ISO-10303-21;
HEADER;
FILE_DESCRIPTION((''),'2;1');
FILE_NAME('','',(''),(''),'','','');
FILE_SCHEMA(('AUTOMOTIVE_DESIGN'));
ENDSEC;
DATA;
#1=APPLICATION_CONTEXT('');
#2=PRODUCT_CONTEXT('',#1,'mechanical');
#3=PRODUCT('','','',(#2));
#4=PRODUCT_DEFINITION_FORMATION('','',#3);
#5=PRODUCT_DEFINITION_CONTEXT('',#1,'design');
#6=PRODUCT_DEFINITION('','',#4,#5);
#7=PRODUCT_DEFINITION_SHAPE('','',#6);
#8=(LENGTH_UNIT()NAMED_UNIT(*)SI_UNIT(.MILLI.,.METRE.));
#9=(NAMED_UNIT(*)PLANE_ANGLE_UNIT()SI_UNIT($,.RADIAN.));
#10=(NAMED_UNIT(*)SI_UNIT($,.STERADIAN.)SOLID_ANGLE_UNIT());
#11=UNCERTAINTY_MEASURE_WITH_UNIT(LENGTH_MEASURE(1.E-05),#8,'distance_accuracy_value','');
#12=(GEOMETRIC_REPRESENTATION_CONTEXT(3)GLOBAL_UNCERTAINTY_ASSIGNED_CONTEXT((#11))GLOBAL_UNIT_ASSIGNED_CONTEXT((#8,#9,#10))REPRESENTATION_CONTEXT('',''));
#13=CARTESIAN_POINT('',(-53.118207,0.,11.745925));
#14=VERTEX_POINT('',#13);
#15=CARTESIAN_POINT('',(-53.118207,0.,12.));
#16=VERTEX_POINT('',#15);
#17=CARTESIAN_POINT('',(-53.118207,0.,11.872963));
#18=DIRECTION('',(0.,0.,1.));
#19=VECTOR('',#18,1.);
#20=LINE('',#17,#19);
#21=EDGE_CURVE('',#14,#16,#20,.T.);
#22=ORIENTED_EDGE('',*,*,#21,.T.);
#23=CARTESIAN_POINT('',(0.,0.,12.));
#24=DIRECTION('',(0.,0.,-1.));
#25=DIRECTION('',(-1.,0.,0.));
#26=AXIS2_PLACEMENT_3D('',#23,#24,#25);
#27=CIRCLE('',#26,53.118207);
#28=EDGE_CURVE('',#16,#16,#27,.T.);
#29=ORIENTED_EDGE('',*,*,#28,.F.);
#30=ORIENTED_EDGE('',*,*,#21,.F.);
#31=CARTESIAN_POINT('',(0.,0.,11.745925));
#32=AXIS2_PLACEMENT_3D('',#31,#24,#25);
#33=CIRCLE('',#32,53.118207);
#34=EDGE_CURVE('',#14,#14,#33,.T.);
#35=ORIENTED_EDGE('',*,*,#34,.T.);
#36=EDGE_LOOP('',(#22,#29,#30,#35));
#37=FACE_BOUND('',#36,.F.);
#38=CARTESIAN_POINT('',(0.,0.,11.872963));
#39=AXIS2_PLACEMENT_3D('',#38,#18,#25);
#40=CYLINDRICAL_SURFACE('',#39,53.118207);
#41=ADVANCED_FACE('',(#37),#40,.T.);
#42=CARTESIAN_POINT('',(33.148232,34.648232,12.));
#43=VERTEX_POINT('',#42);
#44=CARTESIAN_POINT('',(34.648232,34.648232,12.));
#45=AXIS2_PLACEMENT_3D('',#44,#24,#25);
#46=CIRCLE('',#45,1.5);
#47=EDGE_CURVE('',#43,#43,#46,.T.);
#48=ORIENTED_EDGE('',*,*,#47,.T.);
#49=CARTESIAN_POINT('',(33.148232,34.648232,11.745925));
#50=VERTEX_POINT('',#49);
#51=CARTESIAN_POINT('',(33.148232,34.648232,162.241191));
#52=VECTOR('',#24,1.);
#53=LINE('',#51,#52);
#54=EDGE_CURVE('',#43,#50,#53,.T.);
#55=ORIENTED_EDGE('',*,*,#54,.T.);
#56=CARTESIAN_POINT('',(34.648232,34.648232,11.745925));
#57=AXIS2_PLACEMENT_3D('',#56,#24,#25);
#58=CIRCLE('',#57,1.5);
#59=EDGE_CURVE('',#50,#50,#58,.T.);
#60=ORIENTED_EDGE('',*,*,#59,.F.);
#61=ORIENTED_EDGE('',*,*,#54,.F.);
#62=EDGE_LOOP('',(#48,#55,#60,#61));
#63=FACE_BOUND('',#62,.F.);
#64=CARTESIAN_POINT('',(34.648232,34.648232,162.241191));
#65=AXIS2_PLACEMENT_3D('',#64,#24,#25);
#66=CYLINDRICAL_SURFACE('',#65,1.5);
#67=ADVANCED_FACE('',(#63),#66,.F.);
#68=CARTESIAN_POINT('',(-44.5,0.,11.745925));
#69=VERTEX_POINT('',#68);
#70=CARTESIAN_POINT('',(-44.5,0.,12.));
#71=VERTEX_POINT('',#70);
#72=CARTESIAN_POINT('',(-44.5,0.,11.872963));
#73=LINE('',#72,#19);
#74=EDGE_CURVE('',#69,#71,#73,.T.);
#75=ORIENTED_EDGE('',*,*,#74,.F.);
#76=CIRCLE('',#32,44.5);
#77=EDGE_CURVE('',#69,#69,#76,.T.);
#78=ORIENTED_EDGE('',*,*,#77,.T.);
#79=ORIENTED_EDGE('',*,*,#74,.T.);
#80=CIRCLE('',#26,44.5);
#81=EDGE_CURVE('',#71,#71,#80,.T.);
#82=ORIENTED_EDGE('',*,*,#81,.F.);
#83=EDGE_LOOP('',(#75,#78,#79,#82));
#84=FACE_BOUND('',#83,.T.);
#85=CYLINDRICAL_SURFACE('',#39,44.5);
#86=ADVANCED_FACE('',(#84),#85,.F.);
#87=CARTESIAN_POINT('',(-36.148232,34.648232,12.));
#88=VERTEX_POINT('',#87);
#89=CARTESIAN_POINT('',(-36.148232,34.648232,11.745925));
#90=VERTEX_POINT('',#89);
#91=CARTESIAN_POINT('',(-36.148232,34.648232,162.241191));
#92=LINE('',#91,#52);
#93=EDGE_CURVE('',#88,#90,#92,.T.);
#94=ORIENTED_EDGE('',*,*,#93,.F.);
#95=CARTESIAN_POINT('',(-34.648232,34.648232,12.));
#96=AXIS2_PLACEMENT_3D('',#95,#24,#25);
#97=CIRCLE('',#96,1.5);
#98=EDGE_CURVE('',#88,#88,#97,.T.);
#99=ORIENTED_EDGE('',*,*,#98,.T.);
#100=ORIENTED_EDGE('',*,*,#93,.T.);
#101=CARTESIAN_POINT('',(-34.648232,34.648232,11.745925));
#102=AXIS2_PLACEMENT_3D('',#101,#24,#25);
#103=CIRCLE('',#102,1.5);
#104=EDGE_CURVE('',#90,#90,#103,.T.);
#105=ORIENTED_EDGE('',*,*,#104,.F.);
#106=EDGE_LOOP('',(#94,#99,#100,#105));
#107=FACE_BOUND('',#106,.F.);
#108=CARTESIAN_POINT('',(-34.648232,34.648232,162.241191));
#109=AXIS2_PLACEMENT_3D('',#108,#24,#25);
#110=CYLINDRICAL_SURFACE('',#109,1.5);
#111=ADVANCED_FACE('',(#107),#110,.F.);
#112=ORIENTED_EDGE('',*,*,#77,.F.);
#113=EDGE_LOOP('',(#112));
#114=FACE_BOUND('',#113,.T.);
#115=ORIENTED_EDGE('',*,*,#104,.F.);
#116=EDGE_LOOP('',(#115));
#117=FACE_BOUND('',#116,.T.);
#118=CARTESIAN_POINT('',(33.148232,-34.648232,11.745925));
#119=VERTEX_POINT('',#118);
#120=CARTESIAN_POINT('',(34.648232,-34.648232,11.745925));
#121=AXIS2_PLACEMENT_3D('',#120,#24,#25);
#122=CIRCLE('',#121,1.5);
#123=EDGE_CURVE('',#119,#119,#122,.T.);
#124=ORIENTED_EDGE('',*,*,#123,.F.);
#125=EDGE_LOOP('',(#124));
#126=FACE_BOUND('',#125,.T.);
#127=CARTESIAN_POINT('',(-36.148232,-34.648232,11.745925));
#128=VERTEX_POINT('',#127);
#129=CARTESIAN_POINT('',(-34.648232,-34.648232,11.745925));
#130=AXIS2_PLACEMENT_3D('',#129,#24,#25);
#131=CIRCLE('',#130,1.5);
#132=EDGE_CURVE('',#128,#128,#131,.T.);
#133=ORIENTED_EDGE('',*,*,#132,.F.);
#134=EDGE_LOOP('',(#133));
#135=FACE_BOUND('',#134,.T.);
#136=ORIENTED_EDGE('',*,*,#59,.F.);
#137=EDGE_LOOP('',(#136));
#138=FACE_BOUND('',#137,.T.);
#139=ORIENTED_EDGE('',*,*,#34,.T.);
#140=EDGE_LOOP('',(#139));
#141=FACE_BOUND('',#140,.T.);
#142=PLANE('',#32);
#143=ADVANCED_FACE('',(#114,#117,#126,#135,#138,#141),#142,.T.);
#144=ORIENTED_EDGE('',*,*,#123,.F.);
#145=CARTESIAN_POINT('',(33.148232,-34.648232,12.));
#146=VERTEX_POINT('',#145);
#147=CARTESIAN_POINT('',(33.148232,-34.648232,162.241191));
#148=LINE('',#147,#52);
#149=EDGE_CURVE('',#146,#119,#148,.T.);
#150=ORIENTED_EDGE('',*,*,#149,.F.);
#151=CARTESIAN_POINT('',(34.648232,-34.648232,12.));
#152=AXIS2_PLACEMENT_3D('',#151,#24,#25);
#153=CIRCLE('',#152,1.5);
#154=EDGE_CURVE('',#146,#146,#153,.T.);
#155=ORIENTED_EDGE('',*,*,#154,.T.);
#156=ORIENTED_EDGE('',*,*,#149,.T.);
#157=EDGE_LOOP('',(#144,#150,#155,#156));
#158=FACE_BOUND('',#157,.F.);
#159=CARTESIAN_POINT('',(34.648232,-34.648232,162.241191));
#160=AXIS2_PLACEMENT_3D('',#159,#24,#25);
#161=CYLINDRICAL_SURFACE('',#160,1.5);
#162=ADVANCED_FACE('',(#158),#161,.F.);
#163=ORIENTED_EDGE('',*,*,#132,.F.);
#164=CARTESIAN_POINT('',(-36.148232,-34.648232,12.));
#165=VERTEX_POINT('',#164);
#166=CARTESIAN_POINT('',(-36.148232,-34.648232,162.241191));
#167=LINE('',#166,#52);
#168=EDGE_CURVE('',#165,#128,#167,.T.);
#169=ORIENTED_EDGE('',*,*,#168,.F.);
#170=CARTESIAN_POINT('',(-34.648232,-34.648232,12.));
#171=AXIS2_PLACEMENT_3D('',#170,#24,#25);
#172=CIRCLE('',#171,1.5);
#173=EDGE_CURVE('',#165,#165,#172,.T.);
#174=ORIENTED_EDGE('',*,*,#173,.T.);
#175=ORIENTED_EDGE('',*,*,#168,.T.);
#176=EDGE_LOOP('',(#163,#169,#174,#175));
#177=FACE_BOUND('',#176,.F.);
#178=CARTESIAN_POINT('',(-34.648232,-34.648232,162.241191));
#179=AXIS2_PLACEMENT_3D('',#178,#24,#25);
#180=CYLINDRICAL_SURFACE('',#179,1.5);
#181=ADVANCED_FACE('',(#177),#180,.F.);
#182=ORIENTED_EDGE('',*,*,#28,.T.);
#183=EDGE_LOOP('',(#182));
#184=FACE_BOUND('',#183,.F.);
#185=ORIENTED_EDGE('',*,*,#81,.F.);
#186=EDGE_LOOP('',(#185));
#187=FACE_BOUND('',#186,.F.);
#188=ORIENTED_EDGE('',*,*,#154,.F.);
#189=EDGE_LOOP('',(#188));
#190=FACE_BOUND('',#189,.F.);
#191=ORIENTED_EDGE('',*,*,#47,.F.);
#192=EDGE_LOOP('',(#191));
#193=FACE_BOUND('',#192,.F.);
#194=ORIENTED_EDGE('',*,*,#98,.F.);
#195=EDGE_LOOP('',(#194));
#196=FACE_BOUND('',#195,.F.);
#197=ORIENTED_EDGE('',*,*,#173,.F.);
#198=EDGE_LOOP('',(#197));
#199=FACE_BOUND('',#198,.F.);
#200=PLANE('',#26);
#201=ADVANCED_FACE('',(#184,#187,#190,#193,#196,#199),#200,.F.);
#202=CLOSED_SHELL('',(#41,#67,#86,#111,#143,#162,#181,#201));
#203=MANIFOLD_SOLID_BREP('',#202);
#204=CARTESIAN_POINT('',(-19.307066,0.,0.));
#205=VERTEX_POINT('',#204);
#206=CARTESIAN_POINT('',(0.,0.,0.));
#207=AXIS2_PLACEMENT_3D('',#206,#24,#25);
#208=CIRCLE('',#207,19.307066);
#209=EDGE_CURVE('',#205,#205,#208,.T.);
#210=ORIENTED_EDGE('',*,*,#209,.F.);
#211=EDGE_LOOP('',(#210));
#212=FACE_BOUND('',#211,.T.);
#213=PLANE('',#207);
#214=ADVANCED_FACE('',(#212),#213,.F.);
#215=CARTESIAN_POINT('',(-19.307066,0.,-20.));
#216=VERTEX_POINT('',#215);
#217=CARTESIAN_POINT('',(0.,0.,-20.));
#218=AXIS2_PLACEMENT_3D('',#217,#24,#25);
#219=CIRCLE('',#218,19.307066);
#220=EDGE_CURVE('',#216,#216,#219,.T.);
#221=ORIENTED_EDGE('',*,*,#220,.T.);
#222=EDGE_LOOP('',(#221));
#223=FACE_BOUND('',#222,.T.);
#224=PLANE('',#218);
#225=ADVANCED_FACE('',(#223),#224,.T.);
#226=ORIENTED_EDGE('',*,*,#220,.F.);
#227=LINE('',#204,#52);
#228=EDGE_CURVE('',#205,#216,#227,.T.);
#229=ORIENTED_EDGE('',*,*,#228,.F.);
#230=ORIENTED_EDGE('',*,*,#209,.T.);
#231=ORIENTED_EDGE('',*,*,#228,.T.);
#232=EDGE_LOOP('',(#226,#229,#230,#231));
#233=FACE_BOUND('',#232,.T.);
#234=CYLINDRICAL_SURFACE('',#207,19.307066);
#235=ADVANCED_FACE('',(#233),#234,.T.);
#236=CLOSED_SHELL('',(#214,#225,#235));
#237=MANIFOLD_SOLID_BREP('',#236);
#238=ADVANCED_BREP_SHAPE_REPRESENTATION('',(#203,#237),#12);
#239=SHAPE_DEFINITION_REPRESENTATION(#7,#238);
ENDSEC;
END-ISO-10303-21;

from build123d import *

# Parameters (mm, degrees)
F0_W = 8.6182065606
F0_H = 0.2540749386
F6_D = 3


# Not quite as in the source:
# - a feature names something its author has since deleted; it is built from what else it names
# - the program builds the solid bodies; features that only make, move or delete a surface that nothing else refers to are left out


with BuildPart() as f3:
    # F0 (on Front) → F3 (revolve)
    with BuildSketch(Plane.XZ):
        Polygon((-16.4538044245, 0), (-19.3070657551, 0), (-19.3070657551, -20), (0, -20), (0, 0), align=None)
    revolve(axis=Axis((0, 0, 10.1666413248), (0, 0, -1)))


with BuildPart() as f3b:
    # F0 (on Front) → F3, piece 2 (revolve)
    with BuildSketch(Plane.XZ):
        with Locations((-48.8091032803, 11.8729625307)):
            Rectangle(F0_W, F0_H)
    revolve(axis=Axis((0, 0, 10.1666413248), (0, 0, -1)))

    # F6 (through all)
    with Locations(Plane.XY.offset(12)):
        with Locations((-34.6482322781, 34.6482322781), (34.6482322781, 34.6482322781), (34.6482322781, -34.6482322781), (-34.6482322781, -34.6482322781)):
            Hole(F6_D / 2)


solid = Compound([f3.part, f3b.part])
